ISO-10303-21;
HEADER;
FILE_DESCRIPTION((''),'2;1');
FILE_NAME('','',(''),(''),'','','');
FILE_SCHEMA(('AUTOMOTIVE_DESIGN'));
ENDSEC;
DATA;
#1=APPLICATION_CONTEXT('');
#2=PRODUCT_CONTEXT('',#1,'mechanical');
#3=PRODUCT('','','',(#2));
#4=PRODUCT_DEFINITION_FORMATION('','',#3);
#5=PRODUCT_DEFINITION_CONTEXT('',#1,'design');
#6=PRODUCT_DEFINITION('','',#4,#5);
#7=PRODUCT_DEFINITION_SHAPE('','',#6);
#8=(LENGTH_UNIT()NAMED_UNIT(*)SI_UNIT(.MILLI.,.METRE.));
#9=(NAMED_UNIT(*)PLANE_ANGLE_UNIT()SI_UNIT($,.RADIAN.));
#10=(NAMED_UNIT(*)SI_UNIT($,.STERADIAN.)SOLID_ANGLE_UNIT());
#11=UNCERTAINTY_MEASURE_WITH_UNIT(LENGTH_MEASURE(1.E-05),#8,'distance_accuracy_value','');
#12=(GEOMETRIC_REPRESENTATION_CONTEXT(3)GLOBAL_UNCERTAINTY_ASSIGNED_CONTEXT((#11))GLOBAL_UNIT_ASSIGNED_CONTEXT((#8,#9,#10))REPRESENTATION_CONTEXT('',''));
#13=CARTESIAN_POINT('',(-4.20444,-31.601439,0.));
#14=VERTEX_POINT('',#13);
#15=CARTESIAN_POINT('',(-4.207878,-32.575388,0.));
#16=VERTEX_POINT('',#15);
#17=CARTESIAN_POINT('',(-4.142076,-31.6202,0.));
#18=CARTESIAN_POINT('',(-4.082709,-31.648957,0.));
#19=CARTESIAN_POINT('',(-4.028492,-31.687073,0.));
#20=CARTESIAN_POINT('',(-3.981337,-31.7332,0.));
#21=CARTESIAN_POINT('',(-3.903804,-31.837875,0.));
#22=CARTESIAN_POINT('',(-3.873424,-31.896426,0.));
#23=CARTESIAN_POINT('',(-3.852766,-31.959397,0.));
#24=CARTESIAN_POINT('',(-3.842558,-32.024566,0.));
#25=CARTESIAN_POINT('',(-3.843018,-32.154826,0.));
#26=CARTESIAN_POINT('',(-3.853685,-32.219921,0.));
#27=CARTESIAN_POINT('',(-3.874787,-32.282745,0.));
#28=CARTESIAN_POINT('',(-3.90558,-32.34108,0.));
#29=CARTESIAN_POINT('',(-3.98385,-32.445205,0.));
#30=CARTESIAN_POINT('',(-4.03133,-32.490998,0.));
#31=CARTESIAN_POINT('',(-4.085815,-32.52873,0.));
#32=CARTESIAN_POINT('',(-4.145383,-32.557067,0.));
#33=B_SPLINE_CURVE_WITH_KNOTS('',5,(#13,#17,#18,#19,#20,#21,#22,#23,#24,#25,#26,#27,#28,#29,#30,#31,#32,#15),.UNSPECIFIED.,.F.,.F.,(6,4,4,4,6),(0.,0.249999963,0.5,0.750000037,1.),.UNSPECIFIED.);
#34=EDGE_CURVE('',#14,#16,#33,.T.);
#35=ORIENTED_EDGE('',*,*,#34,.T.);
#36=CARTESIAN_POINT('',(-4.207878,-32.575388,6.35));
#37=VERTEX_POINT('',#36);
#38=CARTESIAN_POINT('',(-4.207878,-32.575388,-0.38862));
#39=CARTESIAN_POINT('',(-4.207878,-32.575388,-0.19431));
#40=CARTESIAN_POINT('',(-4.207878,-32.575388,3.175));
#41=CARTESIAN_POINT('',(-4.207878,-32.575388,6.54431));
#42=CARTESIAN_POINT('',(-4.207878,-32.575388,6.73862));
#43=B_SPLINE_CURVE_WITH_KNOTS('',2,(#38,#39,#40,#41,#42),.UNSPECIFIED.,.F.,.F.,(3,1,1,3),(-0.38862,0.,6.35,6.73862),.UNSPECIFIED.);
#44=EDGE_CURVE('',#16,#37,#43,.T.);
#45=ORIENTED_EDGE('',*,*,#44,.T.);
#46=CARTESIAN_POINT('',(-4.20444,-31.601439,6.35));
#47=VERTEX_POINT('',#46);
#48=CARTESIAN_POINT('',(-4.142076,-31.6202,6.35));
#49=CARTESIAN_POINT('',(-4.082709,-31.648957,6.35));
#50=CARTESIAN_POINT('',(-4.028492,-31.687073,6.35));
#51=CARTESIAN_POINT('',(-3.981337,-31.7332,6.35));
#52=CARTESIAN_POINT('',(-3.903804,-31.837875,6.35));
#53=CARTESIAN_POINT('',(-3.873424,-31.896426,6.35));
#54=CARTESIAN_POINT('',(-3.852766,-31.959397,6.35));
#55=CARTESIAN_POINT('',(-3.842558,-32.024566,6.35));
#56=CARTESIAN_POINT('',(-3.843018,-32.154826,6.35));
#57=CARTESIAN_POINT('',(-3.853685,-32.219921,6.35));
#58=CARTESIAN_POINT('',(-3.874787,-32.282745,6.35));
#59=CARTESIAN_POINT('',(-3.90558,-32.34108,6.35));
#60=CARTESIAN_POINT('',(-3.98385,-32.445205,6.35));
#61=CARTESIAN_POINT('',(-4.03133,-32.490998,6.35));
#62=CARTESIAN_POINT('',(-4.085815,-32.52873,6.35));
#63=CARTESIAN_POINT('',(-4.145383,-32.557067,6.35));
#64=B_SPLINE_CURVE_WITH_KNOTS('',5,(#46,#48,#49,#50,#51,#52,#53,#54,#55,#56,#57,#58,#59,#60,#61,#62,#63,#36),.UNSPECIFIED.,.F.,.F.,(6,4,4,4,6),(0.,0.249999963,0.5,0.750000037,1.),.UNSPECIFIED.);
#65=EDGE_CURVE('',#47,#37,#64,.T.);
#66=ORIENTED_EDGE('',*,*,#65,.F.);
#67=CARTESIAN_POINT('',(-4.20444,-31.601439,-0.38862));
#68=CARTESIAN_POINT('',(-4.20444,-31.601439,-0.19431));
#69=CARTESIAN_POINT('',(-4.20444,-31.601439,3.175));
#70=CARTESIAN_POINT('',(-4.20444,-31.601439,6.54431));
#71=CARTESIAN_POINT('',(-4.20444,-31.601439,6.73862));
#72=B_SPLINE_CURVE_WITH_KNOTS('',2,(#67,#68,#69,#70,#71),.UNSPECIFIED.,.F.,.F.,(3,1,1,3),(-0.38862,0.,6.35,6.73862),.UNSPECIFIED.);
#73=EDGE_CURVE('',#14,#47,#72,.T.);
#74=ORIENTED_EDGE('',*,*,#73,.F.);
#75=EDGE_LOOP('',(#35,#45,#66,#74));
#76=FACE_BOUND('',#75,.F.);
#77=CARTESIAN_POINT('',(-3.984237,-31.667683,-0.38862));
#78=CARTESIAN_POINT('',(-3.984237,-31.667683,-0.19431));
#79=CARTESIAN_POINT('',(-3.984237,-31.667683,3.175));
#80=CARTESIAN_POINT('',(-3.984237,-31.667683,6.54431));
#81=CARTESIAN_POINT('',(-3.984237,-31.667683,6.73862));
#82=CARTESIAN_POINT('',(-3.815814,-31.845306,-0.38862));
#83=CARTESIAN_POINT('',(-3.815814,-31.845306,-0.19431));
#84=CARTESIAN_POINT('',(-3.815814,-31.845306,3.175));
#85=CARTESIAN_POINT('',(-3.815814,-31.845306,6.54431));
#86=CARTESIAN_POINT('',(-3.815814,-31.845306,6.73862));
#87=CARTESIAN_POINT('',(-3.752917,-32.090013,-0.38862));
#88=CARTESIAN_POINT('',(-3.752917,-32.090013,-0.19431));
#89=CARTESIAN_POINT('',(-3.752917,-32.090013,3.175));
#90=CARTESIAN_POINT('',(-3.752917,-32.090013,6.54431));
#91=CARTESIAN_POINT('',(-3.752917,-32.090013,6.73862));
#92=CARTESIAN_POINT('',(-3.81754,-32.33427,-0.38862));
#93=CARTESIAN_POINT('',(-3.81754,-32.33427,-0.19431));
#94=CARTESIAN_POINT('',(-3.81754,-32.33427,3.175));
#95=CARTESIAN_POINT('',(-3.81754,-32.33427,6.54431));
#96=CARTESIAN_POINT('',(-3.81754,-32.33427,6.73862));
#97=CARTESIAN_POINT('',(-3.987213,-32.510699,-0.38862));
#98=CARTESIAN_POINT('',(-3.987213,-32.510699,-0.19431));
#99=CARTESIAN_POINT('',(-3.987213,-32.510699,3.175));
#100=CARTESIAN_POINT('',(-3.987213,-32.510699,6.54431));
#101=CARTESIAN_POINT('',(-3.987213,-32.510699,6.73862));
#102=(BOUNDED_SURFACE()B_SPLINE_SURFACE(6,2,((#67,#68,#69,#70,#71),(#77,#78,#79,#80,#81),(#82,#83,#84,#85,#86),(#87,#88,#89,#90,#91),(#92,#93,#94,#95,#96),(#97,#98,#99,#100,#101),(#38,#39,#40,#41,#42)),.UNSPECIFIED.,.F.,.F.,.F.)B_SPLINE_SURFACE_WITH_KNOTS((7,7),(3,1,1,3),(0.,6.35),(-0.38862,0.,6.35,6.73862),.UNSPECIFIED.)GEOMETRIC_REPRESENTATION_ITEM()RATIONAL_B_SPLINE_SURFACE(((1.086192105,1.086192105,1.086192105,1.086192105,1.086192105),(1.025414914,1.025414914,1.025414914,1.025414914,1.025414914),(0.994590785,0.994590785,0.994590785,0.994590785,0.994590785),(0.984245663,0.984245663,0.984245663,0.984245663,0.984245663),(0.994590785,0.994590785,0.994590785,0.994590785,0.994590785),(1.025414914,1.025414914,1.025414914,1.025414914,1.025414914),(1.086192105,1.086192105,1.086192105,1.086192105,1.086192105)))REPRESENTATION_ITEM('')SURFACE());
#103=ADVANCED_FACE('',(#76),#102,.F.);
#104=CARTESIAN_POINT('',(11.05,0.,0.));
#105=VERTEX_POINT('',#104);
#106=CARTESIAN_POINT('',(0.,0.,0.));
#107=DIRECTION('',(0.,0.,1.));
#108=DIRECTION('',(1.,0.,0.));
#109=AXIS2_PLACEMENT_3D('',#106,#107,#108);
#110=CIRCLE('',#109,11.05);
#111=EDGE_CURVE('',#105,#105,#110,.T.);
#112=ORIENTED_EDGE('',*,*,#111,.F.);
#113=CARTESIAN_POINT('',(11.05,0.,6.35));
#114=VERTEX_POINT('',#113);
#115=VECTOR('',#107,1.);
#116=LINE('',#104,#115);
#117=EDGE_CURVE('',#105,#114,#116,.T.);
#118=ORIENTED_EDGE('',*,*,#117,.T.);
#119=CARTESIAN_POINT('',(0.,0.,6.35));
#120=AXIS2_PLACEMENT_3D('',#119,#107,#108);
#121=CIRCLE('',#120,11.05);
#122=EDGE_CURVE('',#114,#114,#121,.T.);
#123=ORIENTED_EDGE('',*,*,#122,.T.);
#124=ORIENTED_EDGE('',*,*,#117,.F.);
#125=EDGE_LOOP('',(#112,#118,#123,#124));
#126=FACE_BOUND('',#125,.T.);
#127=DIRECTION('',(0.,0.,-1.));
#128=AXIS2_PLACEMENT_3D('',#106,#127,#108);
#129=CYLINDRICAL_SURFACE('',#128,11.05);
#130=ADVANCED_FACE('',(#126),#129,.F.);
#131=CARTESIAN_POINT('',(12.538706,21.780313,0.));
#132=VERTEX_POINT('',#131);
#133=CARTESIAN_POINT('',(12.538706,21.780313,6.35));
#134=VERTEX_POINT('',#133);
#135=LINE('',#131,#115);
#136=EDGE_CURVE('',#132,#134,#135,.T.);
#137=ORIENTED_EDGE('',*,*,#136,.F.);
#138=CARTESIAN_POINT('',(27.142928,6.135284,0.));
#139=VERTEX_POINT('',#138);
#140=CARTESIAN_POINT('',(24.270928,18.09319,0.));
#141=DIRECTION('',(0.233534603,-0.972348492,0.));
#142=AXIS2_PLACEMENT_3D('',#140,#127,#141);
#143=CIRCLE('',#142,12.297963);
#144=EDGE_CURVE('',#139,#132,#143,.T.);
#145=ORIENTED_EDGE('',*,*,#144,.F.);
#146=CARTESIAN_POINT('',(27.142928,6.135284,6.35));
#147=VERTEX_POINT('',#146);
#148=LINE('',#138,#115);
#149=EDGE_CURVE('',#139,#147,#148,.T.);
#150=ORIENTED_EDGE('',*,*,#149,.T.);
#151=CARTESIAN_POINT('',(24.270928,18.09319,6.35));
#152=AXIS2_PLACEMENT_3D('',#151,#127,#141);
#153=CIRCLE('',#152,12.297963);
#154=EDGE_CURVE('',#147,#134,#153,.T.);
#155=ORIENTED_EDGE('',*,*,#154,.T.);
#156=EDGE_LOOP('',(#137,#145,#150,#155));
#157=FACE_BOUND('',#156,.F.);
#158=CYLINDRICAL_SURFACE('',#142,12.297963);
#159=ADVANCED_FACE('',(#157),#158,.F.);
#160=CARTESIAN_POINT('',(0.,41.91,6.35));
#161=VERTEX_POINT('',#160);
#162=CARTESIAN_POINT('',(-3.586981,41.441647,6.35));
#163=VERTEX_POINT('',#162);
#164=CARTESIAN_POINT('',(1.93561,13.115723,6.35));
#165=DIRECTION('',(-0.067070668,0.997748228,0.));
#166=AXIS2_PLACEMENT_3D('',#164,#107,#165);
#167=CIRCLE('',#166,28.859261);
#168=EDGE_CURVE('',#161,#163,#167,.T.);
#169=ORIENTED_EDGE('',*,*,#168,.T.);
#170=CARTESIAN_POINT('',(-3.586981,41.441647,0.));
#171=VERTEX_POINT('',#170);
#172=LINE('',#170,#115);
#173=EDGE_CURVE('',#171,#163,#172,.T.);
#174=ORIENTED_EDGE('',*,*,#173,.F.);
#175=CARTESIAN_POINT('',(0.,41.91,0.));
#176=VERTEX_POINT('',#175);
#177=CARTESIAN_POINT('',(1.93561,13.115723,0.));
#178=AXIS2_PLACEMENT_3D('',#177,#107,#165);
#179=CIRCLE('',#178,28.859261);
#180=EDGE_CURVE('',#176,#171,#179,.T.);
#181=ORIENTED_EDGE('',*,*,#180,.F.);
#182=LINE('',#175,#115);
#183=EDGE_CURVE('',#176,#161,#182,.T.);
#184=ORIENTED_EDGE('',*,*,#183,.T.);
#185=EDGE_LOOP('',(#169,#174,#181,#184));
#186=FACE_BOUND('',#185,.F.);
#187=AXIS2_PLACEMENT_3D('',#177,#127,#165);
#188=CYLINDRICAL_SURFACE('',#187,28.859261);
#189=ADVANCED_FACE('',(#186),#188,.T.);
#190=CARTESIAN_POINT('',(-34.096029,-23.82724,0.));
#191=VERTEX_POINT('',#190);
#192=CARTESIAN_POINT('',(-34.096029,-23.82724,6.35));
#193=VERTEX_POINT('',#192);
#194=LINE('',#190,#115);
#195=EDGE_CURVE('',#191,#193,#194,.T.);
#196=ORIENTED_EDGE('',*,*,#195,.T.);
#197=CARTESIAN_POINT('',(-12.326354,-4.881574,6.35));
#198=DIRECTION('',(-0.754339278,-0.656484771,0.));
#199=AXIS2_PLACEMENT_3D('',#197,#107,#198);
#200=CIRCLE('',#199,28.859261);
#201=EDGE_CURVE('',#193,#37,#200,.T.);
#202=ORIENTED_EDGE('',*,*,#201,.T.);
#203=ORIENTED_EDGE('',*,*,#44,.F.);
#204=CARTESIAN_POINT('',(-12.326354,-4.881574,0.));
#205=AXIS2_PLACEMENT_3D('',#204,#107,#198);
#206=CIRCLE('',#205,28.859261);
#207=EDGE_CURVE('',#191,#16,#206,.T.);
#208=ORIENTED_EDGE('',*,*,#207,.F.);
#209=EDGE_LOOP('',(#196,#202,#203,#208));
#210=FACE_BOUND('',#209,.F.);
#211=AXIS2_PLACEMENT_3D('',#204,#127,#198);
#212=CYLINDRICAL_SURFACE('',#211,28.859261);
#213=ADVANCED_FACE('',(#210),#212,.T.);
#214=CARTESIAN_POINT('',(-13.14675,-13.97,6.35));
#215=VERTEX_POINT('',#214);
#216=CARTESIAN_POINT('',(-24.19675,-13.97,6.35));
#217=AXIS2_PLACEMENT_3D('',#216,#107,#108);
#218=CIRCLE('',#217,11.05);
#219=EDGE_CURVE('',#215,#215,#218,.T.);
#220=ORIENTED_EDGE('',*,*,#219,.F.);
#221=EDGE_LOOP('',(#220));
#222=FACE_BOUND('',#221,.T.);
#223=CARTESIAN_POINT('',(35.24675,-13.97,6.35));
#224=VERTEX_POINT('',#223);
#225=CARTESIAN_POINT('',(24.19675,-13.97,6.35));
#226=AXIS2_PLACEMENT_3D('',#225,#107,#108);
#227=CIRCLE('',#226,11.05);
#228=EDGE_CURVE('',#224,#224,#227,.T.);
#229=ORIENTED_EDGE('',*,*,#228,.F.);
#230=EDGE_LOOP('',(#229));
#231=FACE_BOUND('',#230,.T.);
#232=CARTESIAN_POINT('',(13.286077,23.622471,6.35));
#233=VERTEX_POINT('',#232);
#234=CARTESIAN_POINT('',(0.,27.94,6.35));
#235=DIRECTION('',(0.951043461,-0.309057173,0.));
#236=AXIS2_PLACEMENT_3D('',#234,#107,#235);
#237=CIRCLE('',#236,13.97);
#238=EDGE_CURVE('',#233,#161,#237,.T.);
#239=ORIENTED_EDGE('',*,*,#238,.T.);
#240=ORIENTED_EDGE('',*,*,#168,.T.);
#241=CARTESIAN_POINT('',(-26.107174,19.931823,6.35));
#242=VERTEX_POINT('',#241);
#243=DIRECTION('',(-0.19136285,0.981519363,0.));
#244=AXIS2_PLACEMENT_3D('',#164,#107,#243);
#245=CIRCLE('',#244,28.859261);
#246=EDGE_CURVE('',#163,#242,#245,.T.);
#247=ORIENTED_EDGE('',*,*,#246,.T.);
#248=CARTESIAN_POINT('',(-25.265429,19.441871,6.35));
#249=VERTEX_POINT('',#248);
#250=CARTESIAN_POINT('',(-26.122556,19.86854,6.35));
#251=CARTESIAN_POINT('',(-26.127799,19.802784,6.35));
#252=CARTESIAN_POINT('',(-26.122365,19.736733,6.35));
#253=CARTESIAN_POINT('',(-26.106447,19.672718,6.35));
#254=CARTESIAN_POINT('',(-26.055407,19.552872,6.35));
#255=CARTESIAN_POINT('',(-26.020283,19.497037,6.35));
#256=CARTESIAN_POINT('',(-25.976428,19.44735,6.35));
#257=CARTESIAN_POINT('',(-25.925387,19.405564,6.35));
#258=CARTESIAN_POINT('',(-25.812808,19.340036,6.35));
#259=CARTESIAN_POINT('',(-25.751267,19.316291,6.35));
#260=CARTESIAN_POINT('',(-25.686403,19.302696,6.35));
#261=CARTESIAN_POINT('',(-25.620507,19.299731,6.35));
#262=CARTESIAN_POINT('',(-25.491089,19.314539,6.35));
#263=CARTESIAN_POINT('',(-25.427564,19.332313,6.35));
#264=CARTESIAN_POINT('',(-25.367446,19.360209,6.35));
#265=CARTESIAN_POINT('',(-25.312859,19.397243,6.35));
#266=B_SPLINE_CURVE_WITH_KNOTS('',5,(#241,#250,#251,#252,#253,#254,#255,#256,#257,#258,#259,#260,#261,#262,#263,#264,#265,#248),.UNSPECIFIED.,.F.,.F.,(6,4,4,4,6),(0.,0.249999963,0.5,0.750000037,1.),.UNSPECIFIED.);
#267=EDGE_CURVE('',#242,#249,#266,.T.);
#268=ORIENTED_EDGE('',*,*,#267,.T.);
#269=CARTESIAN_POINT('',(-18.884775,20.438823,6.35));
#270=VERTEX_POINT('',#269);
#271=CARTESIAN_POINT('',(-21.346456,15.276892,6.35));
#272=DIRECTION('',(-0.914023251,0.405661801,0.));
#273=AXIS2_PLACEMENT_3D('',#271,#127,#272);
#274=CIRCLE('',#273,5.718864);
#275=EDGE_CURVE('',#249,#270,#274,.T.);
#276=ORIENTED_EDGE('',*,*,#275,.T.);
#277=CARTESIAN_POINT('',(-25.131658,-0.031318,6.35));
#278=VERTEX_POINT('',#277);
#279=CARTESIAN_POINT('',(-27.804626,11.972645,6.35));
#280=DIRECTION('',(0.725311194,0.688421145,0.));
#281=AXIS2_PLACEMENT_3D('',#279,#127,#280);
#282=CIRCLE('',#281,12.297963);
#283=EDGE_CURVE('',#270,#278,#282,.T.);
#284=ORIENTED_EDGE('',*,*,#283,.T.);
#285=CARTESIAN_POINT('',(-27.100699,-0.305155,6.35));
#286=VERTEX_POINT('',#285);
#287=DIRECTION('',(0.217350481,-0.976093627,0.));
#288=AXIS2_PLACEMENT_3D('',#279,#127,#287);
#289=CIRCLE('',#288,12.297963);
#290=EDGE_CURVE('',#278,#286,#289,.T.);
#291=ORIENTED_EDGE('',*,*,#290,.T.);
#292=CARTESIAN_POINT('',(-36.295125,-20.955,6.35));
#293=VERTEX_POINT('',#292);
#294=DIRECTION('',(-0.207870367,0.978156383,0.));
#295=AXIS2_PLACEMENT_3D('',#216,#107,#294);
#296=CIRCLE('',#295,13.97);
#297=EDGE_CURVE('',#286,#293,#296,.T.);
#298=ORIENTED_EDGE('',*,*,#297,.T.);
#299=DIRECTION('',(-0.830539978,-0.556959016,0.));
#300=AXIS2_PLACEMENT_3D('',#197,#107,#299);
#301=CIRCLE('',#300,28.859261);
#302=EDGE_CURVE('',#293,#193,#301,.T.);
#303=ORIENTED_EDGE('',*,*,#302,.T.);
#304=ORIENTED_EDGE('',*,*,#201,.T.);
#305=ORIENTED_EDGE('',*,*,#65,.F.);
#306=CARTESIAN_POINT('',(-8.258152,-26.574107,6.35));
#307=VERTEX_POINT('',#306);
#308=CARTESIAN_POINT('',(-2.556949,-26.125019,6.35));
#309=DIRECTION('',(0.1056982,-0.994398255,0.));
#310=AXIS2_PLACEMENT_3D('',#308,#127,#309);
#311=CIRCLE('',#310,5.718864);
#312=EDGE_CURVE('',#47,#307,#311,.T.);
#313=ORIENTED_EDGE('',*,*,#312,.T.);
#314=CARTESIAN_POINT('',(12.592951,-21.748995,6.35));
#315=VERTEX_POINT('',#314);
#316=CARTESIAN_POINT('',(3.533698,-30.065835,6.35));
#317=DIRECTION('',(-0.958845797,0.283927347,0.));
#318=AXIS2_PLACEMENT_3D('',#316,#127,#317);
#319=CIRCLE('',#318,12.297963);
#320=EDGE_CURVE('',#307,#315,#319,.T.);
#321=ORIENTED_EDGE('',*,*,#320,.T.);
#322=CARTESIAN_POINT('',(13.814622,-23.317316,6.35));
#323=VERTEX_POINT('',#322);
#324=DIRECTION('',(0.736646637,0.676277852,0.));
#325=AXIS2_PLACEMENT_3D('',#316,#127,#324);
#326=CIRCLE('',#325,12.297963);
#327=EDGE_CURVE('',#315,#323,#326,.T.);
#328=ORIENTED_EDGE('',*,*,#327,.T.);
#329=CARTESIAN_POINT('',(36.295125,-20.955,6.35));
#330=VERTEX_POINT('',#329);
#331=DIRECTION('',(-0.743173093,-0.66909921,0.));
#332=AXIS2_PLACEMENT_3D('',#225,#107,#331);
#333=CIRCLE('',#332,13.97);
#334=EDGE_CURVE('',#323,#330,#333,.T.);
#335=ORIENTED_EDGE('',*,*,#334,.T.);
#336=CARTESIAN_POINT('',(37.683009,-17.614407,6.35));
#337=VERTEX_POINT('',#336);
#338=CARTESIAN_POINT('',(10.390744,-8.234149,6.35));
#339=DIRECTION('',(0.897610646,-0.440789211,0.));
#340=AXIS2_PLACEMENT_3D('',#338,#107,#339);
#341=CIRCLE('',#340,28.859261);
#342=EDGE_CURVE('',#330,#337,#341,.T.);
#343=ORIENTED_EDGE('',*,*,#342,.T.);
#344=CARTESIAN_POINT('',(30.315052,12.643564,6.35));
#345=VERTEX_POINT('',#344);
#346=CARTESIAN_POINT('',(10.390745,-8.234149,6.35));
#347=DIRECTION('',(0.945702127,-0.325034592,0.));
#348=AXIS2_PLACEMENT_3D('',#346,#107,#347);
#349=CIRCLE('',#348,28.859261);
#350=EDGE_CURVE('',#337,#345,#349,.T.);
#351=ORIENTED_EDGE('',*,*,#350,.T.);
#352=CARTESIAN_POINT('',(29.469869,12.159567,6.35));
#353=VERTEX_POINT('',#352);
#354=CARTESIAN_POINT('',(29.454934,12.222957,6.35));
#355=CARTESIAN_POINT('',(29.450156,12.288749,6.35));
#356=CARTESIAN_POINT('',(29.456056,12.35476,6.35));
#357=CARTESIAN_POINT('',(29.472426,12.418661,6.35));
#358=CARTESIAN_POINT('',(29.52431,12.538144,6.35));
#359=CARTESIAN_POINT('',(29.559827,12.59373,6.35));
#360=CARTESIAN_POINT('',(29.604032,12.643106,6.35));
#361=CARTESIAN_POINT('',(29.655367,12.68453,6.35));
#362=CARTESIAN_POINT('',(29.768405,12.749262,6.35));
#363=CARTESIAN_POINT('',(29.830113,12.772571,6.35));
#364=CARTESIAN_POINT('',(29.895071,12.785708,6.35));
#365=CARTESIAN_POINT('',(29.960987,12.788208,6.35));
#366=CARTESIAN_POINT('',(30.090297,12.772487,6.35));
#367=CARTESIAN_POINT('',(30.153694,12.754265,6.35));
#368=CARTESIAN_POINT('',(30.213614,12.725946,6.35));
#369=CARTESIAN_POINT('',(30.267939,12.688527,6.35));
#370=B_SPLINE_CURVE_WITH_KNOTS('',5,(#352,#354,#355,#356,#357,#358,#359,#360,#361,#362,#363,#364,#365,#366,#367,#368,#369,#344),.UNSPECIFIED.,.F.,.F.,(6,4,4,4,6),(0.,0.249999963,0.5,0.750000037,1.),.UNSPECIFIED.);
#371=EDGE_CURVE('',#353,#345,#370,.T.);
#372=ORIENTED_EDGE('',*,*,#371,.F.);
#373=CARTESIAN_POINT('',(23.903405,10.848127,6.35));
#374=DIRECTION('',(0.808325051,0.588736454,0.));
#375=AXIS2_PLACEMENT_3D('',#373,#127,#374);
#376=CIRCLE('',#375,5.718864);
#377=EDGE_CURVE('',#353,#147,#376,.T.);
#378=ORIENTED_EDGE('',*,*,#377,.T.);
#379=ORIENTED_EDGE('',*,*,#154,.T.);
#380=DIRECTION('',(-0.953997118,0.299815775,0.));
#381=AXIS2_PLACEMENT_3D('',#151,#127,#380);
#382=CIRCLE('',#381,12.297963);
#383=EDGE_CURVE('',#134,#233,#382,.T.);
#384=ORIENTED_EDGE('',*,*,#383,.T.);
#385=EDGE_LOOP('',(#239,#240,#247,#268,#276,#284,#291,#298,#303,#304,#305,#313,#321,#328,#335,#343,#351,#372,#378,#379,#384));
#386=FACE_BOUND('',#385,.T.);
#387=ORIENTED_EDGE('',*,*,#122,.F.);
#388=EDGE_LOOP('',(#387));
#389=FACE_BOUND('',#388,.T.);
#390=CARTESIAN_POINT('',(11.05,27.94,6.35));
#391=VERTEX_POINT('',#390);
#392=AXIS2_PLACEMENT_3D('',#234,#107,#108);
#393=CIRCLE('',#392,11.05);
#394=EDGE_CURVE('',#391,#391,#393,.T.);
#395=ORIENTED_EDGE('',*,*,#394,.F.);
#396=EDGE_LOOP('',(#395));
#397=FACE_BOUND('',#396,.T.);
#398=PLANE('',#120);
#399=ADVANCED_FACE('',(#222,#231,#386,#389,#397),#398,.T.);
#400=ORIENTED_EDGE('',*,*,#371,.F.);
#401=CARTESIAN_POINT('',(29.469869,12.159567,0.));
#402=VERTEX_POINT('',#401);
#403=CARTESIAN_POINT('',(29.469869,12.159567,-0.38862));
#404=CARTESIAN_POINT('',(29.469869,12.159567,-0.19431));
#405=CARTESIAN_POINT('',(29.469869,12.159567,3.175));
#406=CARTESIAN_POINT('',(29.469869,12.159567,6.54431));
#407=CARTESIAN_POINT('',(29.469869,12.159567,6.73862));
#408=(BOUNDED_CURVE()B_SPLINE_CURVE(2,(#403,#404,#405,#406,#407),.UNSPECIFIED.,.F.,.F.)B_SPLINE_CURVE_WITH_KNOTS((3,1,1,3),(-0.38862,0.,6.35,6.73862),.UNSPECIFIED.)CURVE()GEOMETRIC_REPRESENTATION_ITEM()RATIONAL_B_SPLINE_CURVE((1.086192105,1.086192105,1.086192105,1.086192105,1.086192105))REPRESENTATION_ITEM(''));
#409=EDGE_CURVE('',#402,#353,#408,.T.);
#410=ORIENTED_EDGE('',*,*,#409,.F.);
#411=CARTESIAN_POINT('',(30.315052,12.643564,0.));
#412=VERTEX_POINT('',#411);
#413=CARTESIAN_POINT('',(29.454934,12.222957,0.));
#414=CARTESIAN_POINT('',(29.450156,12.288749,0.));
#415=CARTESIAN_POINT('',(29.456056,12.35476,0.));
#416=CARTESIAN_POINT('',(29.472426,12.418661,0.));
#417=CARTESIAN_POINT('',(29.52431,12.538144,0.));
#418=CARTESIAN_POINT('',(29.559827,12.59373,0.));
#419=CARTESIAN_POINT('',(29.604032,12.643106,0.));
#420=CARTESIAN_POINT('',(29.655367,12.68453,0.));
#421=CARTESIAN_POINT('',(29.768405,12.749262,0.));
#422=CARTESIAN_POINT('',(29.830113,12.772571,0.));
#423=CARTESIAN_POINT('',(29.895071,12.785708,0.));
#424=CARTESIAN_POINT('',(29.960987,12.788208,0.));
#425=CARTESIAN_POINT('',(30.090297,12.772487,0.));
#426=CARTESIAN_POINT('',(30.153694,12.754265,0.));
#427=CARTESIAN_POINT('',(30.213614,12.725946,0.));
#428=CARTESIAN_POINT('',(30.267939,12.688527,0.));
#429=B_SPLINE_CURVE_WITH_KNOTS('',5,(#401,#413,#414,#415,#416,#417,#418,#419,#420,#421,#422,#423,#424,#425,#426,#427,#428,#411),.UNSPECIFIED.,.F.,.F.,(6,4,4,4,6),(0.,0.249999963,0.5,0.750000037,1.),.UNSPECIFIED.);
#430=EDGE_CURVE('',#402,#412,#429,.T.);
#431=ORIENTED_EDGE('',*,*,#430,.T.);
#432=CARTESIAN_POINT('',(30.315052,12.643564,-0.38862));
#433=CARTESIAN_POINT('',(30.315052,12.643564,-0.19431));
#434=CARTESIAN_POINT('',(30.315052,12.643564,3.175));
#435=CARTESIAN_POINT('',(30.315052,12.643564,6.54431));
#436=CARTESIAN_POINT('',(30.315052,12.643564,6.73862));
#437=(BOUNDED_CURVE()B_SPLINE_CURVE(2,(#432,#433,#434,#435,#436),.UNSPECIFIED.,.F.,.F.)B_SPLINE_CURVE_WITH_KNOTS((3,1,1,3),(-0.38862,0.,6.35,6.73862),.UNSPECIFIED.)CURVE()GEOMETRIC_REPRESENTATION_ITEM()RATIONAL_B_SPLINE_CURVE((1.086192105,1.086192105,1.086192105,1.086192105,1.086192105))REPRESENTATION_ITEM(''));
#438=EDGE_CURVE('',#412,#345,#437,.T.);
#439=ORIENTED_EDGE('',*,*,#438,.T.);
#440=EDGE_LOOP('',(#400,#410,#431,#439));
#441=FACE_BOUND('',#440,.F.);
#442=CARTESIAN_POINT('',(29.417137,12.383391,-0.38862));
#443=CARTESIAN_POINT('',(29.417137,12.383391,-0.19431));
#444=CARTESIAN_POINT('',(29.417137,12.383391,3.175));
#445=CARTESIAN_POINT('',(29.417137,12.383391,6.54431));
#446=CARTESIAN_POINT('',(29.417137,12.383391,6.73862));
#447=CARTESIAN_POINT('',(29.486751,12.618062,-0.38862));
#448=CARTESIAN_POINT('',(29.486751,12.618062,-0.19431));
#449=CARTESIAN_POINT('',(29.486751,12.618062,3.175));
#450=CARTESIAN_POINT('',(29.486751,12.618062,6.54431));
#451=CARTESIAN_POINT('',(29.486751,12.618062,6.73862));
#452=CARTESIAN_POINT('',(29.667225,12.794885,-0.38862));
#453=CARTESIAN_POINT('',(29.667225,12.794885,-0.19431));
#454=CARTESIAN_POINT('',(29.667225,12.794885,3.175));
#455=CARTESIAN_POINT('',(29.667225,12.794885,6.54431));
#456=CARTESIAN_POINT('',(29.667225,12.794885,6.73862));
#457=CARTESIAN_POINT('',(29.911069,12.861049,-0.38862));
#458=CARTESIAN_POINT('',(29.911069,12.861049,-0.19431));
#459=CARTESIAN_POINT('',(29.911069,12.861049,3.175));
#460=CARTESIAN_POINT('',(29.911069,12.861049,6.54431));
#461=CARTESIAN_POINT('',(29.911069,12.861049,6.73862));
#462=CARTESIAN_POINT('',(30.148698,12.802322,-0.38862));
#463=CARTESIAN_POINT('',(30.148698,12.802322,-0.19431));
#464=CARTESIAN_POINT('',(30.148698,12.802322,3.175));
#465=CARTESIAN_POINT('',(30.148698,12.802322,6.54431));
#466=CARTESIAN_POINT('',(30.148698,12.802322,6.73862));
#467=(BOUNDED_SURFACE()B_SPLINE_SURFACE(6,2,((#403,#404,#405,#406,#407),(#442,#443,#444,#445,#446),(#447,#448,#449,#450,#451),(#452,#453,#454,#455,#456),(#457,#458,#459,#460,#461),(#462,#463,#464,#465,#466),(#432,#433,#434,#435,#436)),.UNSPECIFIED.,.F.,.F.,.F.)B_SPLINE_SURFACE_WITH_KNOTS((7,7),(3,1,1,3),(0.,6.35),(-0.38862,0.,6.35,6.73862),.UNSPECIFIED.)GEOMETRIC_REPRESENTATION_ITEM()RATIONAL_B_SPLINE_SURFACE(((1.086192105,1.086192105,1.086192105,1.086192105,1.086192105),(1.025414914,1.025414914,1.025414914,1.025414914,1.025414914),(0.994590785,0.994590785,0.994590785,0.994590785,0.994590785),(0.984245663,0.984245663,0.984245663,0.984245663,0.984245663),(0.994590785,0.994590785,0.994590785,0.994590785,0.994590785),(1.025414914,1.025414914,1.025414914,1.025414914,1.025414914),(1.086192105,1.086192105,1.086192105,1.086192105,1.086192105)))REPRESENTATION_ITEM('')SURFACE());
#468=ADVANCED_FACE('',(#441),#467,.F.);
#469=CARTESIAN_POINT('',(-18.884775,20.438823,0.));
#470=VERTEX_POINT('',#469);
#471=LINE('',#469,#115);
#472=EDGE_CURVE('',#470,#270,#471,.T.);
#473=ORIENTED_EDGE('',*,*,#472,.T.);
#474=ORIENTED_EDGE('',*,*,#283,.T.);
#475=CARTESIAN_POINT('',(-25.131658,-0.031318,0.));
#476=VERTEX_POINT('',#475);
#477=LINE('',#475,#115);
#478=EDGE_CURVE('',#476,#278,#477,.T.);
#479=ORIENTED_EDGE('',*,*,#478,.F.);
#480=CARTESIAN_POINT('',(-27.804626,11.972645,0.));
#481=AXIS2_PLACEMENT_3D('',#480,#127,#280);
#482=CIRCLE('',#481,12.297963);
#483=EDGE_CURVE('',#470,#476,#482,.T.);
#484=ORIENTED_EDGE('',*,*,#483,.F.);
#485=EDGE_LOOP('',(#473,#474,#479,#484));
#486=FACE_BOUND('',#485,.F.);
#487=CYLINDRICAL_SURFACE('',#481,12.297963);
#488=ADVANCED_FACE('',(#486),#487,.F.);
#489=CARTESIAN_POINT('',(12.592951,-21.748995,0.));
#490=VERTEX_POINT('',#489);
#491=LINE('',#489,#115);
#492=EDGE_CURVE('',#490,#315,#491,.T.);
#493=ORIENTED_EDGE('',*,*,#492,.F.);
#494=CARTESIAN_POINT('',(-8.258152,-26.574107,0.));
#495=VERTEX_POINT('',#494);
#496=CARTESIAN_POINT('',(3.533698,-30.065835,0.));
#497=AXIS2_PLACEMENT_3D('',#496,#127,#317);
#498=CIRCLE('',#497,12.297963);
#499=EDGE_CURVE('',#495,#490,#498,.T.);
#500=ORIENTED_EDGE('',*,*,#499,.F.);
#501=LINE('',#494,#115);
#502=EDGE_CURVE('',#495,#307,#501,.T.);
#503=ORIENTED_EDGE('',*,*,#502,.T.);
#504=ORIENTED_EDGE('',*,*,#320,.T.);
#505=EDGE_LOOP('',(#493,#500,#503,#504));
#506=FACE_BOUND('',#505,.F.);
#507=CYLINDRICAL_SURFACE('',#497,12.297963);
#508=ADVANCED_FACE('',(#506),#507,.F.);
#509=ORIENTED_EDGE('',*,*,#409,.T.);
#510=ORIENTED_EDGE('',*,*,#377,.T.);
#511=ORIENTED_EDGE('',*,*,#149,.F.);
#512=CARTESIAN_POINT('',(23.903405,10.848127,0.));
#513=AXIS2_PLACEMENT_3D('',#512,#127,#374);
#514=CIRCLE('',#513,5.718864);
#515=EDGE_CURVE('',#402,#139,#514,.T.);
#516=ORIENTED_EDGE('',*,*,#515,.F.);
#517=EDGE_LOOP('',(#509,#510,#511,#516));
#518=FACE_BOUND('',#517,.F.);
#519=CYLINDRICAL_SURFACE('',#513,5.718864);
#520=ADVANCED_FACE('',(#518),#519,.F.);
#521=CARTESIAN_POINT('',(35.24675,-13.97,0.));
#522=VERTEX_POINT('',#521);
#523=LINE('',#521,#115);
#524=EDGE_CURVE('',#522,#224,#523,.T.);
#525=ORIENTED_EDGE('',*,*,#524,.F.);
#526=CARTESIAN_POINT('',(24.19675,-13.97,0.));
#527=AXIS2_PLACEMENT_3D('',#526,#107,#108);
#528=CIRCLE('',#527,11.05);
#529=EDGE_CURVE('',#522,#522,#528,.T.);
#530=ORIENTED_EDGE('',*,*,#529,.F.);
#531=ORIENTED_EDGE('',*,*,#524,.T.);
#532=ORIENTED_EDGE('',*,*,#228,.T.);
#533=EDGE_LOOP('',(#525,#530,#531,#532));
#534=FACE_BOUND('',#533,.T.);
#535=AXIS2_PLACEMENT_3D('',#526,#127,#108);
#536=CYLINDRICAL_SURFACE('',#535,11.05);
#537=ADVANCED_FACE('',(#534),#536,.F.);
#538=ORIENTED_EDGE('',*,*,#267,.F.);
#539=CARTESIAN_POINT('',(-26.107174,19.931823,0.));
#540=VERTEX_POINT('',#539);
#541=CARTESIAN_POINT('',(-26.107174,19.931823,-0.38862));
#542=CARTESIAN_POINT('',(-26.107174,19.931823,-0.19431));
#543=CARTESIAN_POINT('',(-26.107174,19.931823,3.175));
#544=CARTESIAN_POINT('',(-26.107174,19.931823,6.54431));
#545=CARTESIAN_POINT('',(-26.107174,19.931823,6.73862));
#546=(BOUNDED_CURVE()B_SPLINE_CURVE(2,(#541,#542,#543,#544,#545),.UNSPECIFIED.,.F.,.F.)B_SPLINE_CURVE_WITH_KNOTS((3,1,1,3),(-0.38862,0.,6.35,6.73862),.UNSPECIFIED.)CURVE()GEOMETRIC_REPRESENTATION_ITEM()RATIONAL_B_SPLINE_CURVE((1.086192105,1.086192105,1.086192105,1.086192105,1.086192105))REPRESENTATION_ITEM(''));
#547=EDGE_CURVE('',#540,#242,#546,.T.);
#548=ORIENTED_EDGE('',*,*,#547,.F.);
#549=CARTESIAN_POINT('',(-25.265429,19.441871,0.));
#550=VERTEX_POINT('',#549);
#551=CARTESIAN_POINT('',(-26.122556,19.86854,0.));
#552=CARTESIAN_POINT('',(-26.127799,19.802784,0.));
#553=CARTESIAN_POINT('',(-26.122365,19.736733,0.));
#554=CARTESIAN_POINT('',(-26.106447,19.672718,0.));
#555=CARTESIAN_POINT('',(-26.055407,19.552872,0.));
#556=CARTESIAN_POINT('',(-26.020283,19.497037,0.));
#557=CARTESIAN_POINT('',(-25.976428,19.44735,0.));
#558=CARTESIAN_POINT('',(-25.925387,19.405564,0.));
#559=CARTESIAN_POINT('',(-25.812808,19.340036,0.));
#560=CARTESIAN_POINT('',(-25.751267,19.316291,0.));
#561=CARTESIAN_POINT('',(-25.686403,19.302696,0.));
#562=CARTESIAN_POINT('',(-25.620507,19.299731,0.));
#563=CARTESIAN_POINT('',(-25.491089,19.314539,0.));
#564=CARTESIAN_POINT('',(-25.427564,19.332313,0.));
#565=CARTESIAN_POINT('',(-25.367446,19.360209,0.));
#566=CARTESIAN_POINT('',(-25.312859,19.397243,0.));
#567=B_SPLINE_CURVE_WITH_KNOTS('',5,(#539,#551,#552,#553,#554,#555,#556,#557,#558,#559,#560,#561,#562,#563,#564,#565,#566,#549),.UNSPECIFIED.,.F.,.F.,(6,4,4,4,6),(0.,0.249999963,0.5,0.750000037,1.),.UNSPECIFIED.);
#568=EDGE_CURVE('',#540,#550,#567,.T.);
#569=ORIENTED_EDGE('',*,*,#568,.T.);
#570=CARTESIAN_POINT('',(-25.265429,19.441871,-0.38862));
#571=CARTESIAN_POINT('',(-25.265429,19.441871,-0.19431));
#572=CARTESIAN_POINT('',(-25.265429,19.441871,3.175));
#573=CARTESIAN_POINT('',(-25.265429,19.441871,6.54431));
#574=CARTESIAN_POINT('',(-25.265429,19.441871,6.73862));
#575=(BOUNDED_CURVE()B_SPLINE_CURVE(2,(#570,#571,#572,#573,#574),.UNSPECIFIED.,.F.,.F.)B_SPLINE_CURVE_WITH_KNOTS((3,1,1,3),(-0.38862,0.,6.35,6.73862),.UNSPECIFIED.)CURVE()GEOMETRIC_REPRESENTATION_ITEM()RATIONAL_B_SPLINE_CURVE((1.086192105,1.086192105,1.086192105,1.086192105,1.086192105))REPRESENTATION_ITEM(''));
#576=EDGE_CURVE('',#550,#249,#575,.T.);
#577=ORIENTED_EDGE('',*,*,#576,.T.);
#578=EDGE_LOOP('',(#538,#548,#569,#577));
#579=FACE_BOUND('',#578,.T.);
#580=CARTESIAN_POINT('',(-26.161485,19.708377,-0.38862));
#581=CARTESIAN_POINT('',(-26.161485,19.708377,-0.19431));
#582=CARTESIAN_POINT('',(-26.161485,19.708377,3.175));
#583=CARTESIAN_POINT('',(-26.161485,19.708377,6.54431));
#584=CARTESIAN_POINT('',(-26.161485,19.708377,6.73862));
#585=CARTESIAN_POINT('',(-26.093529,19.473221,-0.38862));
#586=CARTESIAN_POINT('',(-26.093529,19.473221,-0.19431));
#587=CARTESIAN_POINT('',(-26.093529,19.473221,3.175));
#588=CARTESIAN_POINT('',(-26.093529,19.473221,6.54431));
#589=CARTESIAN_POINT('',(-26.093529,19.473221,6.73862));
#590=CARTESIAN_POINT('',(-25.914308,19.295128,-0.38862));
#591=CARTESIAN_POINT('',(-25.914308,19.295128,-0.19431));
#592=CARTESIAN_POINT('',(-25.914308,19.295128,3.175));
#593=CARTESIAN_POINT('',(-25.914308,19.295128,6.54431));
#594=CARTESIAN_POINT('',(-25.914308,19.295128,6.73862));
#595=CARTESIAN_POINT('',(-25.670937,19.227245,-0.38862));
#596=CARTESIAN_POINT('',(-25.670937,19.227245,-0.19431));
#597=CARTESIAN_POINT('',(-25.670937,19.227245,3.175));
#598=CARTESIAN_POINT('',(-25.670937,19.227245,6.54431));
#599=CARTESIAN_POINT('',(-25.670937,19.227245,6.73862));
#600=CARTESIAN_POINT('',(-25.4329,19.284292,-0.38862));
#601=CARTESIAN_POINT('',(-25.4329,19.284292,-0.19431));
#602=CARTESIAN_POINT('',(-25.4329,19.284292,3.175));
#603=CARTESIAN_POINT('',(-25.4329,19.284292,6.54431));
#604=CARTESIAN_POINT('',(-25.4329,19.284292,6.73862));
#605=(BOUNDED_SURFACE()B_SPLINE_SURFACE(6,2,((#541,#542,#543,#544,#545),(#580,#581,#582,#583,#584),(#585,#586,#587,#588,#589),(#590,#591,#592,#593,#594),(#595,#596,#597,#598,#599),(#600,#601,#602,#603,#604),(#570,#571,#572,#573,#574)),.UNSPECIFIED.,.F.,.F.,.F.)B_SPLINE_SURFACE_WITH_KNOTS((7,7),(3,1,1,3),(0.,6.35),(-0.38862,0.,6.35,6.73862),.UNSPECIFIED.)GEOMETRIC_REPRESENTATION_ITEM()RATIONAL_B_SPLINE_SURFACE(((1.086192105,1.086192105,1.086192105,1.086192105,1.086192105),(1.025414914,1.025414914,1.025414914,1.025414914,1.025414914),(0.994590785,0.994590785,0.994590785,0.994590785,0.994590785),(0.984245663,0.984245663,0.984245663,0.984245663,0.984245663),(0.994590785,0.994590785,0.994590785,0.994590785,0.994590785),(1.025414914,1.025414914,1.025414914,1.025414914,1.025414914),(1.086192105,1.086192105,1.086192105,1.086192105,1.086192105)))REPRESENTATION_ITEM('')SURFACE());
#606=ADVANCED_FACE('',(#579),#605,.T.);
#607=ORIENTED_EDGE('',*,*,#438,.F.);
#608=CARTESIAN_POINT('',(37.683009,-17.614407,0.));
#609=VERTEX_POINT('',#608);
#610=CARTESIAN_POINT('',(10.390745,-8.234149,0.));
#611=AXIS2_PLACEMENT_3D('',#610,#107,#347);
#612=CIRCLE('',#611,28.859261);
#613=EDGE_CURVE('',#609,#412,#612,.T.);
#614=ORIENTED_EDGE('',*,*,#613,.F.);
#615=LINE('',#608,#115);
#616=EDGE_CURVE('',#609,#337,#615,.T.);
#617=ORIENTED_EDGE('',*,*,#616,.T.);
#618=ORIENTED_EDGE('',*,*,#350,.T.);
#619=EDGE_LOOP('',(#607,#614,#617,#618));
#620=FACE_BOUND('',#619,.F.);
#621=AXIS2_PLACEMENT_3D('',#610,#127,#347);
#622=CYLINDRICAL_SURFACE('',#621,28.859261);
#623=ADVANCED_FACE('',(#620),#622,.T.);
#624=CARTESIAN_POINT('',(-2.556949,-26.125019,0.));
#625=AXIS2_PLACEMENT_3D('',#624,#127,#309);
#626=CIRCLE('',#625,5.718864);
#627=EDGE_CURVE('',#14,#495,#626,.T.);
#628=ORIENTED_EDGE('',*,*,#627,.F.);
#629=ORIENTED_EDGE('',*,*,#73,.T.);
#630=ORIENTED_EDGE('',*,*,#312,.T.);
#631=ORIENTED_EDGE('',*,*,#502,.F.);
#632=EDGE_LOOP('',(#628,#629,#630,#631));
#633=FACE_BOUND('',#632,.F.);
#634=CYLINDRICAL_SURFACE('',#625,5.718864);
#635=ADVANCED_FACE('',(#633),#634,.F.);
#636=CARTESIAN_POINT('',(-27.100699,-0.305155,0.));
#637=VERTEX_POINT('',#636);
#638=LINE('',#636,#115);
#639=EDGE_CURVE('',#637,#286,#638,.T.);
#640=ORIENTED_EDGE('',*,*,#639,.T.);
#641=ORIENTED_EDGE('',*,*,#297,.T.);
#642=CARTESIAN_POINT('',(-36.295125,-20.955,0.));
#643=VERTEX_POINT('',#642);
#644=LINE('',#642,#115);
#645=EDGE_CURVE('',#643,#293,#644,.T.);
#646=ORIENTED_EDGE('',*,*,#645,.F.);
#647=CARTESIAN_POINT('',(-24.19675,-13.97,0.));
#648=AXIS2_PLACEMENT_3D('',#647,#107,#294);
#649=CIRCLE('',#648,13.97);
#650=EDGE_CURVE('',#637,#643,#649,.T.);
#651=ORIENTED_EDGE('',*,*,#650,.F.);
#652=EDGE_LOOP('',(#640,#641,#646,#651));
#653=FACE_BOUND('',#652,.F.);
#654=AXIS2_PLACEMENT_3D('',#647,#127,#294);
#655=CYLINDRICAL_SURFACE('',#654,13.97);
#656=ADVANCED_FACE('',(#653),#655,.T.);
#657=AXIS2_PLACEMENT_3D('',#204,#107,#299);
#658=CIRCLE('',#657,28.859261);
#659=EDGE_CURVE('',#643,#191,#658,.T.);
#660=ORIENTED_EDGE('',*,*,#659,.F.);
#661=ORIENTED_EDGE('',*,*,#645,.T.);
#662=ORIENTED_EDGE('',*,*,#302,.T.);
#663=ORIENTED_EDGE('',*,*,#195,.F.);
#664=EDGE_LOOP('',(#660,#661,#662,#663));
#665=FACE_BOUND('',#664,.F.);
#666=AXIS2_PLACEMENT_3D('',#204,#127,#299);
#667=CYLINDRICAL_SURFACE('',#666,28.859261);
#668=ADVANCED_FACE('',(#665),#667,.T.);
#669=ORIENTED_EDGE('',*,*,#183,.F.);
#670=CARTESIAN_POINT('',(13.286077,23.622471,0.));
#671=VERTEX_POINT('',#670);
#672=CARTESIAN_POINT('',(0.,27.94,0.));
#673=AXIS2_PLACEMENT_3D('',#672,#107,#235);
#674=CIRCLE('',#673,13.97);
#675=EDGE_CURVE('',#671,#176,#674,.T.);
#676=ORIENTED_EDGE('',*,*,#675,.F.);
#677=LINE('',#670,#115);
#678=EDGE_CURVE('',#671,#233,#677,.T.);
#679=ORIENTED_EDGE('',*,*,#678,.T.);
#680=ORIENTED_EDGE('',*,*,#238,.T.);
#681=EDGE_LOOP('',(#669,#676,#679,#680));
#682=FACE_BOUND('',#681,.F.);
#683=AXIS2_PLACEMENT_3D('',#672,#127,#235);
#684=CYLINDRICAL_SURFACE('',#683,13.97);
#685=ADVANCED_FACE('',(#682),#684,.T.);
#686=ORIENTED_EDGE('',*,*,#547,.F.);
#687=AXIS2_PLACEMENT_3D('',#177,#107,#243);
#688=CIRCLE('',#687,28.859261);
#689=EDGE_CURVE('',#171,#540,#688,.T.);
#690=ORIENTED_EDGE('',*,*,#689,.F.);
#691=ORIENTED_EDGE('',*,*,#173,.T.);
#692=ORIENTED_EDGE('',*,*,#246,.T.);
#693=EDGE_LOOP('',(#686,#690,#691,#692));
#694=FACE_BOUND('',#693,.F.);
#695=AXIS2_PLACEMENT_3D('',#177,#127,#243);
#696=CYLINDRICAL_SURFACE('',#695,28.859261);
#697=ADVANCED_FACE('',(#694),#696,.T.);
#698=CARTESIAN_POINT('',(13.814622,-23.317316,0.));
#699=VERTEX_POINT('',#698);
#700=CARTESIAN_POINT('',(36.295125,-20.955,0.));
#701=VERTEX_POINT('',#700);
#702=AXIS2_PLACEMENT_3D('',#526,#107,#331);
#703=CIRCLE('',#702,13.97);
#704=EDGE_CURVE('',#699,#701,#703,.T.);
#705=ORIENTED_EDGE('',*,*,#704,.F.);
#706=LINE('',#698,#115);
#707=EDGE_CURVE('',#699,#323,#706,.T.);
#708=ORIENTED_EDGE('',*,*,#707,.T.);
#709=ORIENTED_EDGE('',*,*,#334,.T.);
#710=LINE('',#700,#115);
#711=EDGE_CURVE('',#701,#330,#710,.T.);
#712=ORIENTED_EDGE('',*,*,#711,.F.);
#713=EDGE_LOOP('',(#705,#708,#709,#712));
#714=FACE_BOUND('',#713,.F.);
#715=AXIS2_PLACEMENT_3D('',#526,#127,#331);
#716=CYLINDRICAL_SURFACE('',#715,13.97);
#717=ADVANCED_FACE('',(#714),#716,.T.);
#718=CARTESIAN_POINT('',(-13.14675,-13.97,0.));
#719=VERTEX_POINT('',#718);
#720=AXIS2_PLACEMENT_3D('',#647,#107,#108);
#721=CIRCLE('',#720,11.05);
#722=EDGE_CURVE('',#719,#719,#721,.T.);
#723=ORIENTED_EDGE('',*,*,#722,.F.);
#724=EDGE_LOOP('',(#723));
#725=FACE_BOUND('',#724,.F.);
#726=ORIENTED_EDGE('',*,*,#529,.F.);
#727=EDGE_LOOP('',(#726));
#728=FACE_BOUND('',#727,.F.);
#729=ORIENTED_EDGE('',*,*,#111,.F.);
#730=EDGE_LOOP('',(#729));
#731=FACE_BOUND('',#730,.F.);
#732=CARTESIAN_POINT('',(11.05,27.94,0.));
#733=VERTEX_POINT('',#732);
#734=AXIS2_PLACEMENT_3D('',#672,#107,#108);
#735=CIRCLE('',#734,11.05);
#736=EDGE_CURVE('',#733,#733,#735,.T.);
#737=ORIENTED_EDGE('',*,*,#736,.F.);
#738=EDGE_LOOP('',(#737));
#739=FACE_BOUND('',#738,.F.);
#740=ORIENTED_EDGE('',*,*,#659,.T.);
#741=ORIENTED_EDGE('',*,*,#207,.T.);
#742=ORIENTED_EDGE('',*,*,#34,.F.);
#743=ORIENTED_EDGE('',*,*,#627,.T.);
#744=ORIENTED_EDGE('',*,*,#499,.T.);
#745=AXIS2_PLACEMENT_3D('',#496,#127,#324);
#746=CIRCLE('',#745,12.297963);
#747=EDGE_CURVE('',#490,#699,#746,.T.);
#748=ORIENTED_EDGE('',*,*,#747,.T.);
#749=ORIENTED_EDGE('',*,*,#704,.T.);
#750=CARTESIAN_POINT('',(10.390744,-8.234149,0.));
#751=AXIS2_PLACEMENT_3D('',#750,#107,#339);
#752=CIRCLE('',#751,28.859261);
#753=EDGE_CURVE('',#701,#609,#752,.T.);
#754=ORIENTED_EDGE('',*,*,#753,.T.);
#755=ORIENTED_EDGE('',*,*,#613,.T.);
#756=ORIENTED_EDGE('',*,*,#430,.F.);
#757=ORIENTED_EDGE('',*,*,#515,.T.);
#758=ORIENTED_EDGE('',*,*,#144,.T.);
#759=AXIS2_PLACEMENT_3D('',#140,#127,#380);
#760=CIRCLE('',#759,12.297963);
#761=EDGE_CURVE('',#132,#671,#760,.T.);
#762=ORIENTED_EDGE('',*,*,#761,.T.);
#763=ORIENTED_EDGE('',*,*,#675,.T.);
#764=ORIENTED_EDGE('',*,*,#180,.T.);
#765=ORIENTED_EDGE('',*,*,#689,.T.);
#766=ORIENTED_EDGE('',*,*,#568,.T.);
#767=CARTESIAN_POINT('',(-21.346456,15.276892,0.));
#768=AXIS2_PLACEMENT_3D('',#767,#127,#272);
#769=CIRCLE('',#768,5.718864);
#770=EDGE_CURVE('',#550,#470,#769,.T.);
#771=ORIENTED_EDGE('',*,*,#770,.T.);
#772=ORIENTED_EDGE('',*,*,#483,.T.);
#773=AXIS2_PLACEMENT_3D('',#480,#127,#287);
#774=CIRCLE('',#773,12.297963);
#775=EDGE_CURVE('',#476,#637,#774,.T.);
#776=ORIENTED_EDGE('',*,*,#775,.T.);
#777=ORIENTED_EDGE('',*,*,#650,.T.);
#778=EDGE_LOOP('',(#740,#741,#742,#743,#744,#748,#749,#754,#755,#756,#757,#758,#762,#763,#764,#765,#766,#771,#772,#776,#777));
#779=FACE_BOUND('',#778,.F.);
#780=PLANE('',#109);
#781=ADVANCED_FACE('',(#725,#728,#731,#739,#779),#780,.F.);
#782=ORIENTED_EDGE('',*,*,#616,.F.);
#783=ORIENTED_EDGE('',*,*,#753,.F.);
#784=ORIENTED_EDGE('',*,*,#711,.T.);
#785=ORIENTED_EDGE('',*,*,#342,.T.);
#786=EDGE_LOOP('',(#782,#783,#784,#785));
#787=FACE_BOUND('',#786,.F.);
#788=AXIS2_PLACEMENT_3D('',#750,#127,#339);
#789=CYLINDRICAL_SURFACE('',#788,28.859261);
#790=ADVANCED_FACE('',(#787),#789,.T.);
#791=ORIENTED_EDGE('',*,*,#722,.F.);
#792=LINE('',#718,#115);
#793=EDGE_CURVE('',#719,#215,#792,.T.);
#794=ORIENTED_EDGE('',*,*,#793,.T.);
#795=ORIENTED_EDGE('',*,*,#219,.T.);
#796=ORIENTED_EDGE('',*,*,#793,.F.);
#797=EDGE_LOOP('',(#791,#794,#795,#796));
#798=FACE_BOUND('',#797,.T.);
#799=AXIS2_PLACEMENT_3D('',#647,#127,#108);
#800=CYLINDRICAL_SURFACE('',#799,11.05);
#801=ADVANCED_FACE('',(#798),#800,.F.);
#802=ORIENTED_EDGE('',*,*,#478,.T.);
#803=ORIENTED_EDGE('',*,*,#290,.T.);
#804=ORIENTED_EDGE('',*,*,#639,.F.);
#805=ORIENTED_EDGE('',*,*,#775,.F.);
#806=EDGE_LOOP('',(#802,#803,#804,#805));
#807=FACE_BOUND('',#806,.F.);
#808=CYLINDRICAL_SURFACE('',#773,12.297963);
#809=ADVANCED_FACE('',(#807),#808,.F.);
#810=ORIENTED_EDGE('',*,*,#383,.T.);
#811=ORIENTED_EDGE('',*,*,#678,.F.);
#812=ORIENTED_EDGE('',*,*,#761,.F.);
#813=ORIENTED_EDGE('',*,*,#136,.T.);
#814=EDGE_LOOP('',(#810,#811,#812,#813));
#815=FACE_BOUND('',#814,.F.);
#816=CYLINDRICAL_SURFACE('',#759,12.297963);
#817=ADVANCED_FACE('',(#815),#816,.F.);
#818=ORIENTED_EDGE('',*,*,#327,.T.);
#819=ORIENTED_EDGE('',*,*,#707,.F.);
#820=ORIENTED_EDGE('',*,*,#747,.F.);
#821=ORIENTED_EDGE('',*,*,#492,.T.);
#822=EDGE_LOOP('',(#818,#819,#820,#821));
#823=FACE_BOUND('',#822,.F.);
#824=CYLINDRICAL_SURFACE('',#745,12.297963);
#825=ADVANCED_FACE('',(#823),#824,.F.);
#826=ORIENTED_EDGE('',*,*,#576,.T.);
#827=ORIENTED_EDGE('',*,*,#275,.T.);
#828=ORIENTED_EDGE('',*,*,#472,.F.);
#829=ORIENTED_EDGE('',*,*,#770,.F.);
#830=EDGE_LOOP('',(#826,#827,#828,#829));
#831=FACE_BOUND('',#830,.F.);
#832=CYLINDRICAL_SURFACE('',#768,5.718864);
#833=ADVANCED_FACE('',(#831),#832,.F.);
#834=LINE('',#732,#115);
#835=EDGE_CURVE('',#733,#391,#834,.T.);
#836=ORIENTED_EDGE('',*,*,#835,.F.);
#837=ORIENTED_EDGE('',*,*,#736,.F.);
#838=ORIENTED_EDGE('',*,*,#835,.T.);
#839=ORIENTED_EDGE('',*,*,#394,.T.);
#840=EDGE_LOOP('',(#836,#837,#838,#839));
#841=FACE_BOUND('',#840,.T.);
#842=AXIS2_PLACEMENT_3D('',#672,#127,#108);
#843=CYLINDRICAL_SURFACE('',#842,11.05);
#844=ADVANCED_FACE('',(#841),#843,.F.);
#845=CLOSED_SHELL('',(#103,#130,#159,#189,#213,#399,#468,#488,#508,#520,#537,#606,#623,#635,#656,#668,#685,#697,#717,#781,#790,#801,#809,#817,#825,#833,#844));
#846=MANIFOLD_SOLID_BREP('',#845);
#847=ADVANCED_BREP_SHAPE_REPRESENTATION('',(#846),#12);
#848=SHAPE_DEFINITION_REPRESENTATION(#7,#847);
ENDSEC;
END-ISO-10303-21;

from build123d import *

# Parameters (mm, degrees)
F0_R     = 11.05
F1_DEPTH = 6.35
F2_R     = 0.508


# Not quite as in the source:
# - a feature names something its author has since deleted; it is built from what else it names


with BuildPart() as f1:
    # F0 (on Top) → F1 (new body)
    with BuildSketch(Plane.XY):
        with BuildLine():
            ThreePointArc((27.1429276567, 6.1352837814), (15.2810658667, 9.7013912391), (12.5387063316, 21.7803130331))
            ThreePointArc((12.5387063316, 21.7803130331), (12.8751071514, 22.7165186649), (13.2860771432, 23.6224712919))
            ThreePointArc((13.2860771432, 23.6224712919), (11.3021408603, 36.1511212373), (0, 41.91))
            ThreePointArc((0, 41.91), (-1.8008358417, 41.7320810261), (-3.5869805559, 41.4416469548))
            ThreePointArc((-3.5869805559, 41.4416469548), (-18.8414291839, 33.1449919843), (-26.5736300498, 17.5968166441))
            ThreePointArc((-26.5736300498, 17.5968166441), (-23.32919107, 20.6410473634), (-18.8847754424, 20.4388229931))
            ThreePointArc((-18.8847754424, 20.4388229931), (-16.0421841985, 8.3830956179), (-25.1316575548, -0.0313183028))
            ThreePointArc((-25.1316575548, -0.0313183028), (-26.1106358251, -0.2080894629), (-27.1006988106, -0.3051553233))
            ThreePointArc((-27.1006988106, -0.3051553233), (-36.958859797, -8.2876195165), (-36.2951246726, -20.955))
            ThreePointArc((-36.2951246726, -20.955), (-35.2406244005, -22.4256101), (-34.0960287596, -23.8272397617))
            ThreePointArc((-34.0960287596, -23.8272397617), (-19.2836904747, -32.889652309), (-1.9524752146, -31.811847016))
            ThreePointArc((-1.9524752146, -31.811847016), (-6.2110758425, -30.5241957981), (-8.2581522143, -26.5741067745))
            ThreePointArc((-8.2581522143, -26.5741067745), (0.7611183318, -18.0844868571), (12.5929512232, -21.7489947303))
            ThreePointArc((12.5929512232, -21.7489947303), (13.2355286736, -22.508429202), (13.8146216674, -23.3173159686))
            ThreePointArc((13.8146216674, -23.3173159686), (25.6567189367, -27.8635017208), (36.2951246726, -20.955))
            ThreePointArc((36.2951246726, -20.955), (37.0414602422, -19.3064709261), (37.6830093155, -17.6144071931))
            ThreePointArc((37.6830093155, -17.6144071931), (38.1251196586, -0.2553396753), (28.5261052644, 14.2150303719))
            ThreePointArc((28.5261052644, 14.2150303719), (29.5402669125, 9.8831484346), (27.1429276567, 6.1352837814))
        make_face()
        with Locations((-24.1967497817, -13.97)):
            Circle(F0_R, mode=Mode.SUBTRACT)
        Circle(F0_R, mode=Mode.SUBTRACT)
        with Locations((24.1967497817, -13.97)):
            Circle(F0_R, mode=Mode.SUBTRACT)
        with Locations((0, 27.94)):
            Circle(F0_R, mode=Mode.SUBTRACT)
    extrude(amount=F1_DEPTH)

    # F2
    f2_edges = [f1.edges().sort_by_distance(p)[0] for p in [
        (-1.952475, -31.811847, 3.175),
        (-26.57363, 17.596817, 3.175),
        (28.526105, 14.21503, 3.175),
    ]]
    fillet(f2_edges, radius=F2_R)


solid = f1.part
